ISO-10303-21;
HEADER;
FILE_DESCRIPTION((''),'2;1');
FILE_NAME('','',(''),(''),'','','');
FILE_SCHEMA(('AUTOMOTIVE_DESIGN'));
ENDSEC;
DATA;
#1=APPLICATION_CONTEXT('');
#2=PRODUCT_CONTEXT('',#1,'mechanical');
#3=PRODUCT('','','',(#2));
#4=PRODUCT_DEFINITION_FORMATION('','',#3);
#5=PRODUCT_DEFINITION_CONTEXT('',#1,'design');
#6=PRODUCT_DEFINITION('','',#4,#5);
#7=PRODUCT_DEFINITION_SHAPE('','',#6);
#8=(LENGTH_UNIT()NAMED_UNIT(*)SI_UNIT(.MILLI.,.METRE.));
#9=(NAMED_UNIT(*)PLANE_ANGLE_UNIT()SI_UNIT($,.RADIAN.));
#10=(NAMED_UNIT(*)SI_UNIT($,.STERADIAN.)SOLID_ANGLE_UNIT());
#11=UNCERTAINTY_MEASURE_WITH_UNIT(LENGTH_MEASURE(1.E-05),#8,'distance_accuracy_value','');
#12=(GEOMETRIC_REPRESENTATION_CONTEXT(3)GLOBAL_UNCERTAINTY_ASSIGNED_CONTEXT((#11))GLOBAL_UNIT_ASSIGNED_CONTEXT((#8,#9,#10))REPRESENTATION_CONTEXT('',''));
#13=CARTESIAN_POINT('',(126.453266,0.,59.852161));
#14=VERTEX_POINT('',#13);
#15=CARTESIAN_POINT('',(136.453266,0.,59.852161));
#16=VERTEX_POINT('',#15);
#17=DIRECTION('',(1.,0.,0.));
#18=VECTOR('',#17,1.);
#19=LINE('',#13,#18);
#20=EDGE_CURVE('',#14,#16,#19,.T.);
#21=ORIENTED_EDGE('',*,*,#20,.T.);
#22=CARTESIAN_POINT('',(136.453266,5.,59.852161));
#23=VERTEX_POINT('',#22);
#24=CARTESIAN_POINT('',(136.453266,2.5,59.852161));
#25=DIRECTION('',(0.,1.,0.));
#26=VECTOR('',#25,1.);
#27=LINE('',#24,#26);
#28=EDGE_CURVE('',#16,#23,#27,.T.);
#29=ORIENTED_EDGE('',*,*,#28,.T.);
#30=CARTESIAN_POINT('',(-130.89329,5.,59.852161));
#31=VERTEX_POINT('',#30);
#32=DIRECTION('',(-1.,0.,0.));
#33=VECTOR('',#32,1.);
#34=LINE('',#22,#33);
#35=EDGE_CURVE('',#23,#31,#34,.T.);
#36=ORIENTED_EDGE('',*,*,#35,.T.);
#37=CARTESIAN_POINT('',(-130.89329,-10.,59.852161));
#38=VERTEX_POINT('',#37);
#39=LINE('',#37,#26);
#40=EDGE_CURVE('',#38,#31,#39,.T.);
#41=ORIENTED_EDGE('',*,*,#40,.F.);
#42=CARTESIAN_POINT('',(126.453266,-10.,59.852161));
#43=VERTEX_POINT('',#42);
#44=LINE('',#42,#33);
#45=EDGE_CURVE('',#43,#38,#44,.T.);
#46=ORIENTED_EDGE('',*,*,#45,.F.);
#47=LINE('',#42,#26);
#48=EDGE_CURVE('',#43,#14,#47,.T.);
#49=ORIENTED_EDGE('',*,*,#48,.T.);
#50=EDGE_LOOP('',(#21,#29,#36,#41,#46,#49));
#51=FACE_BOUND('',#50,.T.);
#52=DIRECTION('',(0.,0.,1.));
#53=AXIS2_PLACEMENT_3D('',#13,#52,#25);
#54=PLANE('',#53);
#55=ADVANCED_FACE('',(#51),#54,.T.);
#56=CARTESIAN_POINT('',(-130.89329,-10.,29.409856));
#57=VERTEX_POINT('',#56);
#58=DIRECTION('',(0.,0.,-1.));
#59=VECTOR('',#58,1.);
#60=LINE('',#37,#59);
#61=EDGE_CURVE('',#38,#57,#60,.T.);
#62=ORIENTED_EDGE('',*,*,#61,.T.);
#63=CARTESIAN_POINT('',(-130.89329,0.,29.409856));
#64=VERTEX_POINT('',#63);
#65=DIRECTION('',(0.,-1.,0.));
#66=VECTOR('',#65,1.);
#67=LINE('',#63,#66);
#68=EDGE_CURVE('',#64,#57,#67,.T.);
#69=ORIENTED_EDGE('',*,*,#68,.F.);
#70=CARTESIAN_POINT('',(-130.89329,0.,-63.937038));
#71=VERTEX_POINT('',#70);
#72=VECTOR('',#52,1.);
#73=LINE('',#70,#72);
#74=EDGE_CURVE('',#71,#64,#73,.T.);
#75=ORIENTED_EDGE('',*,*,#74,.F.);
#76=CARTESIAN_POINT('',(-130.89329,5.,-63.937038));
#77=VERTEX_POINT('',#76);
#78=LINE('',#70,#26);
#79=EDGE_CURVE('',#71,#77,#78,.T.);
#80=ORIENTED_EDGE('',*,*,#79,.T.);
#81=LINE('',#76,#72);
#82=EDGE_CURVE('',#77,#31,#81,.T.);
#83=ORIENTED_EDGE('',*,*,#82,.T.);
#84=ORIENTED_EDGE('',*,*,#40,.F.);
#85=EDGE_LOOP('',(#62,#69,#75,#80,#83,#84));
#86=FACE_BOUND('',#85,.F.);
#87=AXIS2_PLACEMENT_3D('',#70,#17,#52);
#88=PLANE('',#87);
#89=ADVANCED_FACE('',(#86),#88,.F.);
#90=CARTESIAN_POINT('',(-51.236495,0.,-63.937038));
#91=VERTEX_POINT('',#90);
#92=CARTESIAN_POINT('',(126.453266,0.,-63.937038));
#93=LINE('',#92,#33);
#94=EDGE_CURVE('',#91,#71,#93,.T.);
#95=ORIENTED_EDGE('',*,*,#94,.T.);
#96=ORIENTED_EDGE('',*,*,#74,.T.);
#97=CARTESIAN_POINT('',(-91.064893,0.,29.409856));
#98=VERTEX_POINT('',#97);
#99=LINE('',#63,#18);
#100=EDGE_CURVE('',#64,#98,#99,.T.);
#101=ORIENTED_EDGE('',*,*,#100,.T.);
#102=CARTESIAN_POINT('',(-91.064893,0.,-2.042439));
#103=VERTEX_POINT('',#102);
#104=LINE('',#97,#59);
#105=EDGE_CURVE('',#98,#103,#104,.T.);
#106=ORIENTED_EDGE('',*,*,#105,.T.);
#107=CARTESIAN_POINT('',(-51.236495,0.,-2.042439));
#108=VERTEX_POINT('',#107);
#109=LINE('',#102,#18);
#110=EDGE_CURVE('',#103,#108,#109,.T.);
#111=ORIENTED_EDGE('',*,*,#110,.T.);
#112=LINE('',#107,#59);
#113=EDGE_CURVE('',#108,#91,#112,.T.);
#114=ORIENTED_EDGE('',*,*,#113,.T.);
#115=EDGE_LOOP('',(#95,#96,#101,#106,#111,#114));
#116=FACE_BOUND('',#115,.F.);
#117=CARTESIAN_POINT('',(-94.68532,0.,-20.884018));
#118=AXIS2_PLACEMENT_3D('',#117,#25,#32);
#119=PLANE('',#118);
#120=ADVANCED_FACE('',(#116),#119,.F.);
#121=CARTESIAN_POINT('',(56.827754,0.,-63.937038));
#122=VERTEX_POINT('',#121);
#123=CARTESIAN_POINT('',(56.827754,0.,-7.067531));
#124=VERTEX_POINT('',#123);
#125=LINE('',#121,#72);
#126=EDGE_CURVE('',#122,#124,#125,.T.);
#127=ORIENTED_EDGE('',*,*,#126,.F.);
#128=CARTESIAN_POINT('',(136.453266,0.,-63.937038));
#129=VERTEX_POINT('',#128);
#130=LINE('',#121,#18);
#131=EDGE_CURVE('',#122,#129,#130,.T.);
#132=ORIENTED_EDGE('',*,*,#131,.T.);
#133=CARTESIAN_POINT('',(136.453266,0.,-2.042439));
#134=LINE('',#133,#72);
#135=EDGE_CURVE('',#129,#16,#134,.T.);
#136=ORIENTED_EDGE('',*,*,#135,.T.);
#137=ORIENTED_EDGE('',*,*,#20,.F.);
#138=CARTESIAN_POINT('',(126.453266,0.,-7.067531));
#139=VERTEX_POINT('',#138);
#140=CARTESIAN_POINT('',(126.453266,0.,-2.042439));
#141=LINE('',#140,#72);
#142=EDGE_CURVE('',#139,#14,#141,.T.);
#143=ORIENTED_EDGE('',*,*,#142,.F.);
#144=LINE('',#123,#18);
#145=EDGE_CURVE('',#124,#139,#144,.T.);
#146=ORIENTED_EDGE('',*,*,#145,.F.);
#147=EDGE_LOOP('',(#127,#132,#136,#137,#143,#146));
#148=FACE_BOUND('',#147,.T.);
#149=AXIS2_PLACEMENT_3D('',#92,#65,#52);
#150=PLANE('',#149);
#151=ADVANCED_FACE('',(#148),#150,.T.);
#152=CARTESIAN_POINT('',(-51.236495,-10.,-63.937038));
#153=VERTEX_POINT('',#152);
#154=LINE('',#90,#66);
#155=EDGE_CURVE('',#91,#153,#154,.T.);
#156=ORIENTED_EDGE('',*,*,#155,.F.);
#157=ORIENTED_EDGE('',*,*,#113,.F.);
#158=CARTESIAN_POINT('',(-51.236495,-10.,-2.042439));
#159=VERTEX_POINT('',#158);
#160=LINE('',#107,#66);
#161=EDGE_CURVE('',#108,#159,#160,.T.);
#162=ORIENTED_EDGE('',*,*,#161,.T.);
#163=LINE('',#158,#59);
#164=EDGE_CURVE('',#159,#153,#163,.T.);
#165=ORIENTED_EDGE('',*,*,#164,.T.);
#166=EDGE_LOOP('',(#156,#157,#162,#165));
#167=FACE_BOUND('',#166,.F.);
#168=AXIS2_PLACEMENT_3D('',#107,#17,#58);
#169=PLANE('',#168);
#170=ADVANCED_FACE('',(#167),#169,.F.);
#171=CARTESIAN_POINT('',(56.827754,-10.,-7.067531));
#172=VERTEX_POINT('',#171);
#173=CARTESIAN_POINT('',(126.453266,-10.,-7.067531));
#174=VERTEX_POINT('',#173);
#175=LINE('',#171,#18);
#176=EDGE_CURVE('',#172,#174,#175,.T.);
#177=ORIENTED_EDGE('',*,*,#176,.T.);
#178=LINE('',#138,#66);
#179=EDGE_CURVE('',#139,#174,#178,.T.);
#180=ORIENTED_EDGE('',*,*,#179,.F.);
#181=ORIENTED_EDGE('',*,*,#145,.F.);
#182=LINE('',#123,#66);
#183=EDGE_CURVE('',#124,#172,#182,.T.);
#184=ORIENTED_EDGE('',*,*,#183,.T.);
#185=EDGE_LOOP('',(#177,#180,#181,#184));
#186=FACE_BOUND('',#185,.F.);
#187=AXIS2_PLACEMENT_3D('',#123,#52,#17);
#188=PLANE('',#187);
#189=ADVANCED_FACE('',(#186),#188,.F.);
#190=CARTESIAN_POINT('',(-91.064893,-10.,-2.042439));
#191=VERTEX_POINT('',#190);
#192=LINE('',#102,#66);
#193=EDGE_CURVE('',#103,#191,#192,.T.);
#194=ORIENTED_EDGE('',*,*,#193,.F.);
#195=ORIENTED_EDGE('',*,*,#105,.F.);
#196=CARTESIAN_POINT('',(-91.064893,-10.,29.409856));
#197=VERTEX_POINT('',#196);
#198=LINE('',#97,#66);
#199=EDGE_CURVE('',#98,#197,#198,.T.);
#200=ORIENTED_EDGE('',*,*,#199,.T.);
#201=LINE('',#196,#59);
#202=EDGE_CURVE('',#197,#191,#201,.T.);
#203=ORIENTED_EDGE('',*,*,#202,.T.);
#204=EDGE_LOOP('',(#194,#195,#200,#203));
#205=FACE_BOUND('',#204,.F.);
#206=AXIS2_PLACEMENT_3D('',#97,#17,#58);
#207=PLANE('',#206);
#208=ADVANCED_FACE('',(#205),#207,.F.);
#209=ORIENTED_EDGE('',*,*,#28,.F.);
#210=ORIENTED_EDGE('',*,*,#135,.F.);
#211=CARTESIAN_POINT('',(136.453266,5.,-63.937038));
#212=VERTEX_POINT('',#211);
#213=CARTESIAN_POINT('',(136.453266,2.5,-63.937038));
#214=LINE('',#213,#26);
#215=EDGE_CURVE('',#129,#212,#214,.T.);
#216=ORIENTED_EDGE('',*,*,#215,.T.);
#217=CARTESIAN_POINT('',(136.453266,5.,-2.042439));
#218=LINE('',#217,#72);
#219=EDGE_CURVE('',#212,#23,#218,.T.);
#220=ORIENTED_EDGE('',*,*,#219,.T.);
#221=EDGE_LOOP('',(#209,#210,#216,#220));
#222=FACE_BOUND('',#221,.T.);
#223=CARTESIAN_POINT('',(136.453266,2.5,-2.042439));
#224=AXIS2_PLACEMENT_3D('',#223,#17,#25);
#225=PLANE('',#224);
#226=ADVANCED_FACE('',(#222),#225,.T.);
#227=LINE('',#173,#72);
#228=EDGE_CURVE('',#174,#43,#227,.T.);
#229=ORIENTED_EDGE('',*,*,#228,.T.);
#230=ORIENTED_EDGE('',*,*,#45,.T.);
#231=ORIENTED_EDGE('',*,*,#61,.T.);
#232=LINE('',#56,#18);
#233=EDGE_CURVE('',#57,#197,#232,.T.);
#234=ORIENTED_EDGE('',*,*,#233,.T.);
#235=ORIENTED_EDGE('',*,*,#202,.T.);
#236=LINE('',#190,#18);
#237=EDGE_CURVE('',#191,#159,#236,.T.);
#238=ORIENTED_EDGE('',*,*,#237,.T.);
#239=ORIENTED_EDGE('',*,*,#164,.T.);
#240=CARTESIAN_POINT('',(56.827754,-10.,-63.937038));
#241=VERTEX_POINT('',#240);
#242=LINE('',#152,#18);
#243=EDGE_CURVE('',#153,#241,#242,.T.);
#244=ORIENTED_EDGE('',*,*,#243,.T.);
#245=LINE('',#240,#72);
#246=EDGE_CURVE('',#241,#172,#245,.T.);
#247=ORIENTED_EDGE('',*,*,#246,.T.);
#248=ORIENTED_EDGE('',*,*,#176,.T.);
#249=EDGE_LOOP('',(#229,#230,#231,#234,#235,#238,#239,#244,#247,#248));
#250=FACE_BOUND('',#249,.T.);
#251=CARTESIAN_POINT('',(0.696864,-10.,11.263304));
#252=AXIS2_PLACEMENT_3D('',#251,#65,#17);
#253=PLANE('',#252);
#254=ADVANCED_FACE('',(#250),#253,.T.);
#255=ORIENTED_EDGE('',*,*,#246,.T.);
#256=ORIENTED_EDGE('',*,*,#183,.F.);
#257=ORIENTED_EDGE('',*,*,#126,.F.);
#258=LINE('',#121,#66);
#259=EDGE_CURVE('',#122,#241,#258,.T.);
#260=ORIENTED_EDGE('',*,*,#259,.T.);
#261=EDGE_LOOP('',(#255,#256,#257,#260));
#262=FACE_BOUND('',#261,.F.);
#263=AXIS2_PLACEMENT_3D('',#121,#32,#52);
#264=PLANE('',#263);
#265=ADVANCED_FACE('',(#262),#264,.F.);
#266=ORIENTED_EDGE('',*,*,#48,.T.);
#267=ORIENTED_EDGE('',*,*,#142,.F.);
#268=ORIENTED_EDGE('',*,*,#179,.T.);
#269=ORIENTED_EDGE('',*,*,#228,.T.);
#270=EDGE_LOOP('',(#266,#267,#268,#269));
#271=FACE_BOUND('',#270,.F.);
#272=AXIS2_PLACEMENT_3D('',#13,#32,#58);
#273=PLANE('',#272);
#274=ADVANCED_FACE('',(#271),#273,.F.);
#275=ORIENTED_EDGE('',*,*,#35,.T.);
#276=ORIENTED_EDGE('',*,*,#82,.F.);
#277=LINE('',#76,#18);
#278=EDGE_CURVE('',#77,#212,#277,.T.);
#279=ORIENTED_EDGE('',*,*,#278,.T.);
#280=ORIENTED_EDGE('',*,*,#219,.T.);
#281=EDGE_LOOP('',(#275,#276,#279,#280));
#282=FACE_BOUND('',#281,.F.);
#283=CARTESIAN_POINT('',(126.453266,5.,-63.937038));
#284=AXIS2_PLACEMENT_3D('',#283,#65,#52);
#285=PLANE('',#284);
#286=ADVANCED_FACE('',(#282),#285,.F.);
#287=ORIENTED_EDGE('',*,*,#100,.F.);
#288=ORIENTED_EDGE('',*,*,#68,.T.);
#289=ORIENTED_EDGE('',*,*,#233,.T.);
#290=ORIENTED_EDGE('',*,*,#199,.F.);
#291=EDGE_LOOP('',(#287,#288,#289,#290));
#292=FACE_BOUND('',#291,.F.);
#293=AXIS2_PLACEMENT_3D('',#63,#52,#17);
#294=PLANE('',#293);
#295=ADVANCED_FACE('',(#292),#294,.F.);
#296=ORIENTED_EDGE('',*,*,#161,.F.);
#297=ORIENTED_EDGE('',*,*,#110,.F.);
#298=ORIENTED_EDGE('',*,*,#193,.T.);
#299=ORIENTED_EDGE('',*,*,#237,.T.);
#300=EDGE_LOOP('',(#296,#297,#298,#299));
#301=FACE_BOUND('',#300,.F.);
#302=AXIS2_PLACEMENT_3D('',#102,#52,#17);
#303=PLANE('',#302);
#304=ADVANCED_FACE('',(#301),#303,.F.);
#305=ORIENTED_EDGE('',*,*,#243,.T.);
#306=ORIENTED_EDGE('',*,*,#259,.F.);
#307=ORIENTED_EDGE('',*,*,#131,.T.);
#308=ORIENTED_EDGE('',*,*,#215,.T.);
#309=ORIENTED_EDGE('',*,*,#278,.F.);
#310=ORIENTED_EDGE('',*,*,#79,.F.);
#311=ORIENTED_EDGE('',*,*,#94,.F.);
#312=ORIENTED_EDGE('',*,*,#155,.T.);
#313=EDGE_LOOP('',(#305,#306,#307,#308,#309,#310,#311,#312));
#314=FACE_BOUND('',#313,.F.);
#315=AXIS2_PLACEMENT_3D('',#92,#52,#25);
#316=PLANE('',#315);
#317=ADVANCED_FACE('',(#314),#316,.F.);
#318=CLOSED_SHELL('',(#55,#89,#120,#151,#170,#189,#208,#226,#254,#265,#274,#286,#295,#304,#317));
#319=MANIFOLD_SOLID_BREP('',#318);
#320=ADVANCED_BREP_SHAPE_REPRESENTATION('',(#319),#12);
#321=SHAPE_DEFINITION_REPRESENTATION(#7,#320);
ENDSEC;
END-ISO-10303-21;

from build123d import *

# Parameters (mm, degrees)
F1_DEPTH = 10
F2_W     = 69.6255117655
F2_H     = 56.8695068359
F3_DEPTH = 5
F4_W     = 5
F4_H     = 123.7891986966
F5_DEPTH = 10


with BuildPart() as f1:
    # F0 (on Front) → F1 (new body)
    with BuildSketch(Plane.XZ):
        Polygon((126.4532655478, 59.8521605134), (-130.8932900429, 59.8521605134), (-130.8932900429, 29.4098556042), (-91.0648927093, 29.4098556042), (-91.0648927093, -2.0424388349), (-51.2364953756, -2.0424388349), (-51.2364953756, -63.9370381832), (56.8277537823, -63.9370381832), (56.8277537823, -7.0675313473), (126.4532655478, -7.0675313473), align=None)
    extrude(amount=F1_DEPTH)

    # F2 (on face) → F3 (join)
    with BuildSketch(Plane(origin=(0, 0, 0), x_dir=(-1, 0, 0), z_dir=(0, 1, 0))):
        Polygon((51.2364953756, -63.9370381832), (130.8932900429, -63.9370381832), (130.8932900429, 29.4098556042), (91.0648927093, 29.4098556042), (91.0648927093, -2.0424388349), (51.2364953756, -2.0424388349), align=None)
        with Locations((-91.640509665, -35.5022847652)):
            Rectangle(F2_W, F2_H)
        Polygon((-56.8277537823, -63.9370381832), (51.2364953756, -63.9370381832), (51.2364953756, -2.0424388349), (91.0648927093, -2.0424388349), (91.0648927093, 29.4098556042), (130.8932900429, 29.4098556042), (130.8932900429, 59.8521605134), (-126.4532655478, 59.8521605134), (-126.4532655478, -7.0675313473), (-56.8277537823, -7.0675313473), align=None)
    extrude(amount=F3_DEPTH)

    # F4 (on face) → F5 (join)
    with BuildSketch(Plane.YZ.offset(126.4532655478)):
        with Locations((2.5, -2.0424388349)):
            Rectangle(F4_W, F4_H)
    extrude(amount=F5_DEPTH)


solid = f1.part
